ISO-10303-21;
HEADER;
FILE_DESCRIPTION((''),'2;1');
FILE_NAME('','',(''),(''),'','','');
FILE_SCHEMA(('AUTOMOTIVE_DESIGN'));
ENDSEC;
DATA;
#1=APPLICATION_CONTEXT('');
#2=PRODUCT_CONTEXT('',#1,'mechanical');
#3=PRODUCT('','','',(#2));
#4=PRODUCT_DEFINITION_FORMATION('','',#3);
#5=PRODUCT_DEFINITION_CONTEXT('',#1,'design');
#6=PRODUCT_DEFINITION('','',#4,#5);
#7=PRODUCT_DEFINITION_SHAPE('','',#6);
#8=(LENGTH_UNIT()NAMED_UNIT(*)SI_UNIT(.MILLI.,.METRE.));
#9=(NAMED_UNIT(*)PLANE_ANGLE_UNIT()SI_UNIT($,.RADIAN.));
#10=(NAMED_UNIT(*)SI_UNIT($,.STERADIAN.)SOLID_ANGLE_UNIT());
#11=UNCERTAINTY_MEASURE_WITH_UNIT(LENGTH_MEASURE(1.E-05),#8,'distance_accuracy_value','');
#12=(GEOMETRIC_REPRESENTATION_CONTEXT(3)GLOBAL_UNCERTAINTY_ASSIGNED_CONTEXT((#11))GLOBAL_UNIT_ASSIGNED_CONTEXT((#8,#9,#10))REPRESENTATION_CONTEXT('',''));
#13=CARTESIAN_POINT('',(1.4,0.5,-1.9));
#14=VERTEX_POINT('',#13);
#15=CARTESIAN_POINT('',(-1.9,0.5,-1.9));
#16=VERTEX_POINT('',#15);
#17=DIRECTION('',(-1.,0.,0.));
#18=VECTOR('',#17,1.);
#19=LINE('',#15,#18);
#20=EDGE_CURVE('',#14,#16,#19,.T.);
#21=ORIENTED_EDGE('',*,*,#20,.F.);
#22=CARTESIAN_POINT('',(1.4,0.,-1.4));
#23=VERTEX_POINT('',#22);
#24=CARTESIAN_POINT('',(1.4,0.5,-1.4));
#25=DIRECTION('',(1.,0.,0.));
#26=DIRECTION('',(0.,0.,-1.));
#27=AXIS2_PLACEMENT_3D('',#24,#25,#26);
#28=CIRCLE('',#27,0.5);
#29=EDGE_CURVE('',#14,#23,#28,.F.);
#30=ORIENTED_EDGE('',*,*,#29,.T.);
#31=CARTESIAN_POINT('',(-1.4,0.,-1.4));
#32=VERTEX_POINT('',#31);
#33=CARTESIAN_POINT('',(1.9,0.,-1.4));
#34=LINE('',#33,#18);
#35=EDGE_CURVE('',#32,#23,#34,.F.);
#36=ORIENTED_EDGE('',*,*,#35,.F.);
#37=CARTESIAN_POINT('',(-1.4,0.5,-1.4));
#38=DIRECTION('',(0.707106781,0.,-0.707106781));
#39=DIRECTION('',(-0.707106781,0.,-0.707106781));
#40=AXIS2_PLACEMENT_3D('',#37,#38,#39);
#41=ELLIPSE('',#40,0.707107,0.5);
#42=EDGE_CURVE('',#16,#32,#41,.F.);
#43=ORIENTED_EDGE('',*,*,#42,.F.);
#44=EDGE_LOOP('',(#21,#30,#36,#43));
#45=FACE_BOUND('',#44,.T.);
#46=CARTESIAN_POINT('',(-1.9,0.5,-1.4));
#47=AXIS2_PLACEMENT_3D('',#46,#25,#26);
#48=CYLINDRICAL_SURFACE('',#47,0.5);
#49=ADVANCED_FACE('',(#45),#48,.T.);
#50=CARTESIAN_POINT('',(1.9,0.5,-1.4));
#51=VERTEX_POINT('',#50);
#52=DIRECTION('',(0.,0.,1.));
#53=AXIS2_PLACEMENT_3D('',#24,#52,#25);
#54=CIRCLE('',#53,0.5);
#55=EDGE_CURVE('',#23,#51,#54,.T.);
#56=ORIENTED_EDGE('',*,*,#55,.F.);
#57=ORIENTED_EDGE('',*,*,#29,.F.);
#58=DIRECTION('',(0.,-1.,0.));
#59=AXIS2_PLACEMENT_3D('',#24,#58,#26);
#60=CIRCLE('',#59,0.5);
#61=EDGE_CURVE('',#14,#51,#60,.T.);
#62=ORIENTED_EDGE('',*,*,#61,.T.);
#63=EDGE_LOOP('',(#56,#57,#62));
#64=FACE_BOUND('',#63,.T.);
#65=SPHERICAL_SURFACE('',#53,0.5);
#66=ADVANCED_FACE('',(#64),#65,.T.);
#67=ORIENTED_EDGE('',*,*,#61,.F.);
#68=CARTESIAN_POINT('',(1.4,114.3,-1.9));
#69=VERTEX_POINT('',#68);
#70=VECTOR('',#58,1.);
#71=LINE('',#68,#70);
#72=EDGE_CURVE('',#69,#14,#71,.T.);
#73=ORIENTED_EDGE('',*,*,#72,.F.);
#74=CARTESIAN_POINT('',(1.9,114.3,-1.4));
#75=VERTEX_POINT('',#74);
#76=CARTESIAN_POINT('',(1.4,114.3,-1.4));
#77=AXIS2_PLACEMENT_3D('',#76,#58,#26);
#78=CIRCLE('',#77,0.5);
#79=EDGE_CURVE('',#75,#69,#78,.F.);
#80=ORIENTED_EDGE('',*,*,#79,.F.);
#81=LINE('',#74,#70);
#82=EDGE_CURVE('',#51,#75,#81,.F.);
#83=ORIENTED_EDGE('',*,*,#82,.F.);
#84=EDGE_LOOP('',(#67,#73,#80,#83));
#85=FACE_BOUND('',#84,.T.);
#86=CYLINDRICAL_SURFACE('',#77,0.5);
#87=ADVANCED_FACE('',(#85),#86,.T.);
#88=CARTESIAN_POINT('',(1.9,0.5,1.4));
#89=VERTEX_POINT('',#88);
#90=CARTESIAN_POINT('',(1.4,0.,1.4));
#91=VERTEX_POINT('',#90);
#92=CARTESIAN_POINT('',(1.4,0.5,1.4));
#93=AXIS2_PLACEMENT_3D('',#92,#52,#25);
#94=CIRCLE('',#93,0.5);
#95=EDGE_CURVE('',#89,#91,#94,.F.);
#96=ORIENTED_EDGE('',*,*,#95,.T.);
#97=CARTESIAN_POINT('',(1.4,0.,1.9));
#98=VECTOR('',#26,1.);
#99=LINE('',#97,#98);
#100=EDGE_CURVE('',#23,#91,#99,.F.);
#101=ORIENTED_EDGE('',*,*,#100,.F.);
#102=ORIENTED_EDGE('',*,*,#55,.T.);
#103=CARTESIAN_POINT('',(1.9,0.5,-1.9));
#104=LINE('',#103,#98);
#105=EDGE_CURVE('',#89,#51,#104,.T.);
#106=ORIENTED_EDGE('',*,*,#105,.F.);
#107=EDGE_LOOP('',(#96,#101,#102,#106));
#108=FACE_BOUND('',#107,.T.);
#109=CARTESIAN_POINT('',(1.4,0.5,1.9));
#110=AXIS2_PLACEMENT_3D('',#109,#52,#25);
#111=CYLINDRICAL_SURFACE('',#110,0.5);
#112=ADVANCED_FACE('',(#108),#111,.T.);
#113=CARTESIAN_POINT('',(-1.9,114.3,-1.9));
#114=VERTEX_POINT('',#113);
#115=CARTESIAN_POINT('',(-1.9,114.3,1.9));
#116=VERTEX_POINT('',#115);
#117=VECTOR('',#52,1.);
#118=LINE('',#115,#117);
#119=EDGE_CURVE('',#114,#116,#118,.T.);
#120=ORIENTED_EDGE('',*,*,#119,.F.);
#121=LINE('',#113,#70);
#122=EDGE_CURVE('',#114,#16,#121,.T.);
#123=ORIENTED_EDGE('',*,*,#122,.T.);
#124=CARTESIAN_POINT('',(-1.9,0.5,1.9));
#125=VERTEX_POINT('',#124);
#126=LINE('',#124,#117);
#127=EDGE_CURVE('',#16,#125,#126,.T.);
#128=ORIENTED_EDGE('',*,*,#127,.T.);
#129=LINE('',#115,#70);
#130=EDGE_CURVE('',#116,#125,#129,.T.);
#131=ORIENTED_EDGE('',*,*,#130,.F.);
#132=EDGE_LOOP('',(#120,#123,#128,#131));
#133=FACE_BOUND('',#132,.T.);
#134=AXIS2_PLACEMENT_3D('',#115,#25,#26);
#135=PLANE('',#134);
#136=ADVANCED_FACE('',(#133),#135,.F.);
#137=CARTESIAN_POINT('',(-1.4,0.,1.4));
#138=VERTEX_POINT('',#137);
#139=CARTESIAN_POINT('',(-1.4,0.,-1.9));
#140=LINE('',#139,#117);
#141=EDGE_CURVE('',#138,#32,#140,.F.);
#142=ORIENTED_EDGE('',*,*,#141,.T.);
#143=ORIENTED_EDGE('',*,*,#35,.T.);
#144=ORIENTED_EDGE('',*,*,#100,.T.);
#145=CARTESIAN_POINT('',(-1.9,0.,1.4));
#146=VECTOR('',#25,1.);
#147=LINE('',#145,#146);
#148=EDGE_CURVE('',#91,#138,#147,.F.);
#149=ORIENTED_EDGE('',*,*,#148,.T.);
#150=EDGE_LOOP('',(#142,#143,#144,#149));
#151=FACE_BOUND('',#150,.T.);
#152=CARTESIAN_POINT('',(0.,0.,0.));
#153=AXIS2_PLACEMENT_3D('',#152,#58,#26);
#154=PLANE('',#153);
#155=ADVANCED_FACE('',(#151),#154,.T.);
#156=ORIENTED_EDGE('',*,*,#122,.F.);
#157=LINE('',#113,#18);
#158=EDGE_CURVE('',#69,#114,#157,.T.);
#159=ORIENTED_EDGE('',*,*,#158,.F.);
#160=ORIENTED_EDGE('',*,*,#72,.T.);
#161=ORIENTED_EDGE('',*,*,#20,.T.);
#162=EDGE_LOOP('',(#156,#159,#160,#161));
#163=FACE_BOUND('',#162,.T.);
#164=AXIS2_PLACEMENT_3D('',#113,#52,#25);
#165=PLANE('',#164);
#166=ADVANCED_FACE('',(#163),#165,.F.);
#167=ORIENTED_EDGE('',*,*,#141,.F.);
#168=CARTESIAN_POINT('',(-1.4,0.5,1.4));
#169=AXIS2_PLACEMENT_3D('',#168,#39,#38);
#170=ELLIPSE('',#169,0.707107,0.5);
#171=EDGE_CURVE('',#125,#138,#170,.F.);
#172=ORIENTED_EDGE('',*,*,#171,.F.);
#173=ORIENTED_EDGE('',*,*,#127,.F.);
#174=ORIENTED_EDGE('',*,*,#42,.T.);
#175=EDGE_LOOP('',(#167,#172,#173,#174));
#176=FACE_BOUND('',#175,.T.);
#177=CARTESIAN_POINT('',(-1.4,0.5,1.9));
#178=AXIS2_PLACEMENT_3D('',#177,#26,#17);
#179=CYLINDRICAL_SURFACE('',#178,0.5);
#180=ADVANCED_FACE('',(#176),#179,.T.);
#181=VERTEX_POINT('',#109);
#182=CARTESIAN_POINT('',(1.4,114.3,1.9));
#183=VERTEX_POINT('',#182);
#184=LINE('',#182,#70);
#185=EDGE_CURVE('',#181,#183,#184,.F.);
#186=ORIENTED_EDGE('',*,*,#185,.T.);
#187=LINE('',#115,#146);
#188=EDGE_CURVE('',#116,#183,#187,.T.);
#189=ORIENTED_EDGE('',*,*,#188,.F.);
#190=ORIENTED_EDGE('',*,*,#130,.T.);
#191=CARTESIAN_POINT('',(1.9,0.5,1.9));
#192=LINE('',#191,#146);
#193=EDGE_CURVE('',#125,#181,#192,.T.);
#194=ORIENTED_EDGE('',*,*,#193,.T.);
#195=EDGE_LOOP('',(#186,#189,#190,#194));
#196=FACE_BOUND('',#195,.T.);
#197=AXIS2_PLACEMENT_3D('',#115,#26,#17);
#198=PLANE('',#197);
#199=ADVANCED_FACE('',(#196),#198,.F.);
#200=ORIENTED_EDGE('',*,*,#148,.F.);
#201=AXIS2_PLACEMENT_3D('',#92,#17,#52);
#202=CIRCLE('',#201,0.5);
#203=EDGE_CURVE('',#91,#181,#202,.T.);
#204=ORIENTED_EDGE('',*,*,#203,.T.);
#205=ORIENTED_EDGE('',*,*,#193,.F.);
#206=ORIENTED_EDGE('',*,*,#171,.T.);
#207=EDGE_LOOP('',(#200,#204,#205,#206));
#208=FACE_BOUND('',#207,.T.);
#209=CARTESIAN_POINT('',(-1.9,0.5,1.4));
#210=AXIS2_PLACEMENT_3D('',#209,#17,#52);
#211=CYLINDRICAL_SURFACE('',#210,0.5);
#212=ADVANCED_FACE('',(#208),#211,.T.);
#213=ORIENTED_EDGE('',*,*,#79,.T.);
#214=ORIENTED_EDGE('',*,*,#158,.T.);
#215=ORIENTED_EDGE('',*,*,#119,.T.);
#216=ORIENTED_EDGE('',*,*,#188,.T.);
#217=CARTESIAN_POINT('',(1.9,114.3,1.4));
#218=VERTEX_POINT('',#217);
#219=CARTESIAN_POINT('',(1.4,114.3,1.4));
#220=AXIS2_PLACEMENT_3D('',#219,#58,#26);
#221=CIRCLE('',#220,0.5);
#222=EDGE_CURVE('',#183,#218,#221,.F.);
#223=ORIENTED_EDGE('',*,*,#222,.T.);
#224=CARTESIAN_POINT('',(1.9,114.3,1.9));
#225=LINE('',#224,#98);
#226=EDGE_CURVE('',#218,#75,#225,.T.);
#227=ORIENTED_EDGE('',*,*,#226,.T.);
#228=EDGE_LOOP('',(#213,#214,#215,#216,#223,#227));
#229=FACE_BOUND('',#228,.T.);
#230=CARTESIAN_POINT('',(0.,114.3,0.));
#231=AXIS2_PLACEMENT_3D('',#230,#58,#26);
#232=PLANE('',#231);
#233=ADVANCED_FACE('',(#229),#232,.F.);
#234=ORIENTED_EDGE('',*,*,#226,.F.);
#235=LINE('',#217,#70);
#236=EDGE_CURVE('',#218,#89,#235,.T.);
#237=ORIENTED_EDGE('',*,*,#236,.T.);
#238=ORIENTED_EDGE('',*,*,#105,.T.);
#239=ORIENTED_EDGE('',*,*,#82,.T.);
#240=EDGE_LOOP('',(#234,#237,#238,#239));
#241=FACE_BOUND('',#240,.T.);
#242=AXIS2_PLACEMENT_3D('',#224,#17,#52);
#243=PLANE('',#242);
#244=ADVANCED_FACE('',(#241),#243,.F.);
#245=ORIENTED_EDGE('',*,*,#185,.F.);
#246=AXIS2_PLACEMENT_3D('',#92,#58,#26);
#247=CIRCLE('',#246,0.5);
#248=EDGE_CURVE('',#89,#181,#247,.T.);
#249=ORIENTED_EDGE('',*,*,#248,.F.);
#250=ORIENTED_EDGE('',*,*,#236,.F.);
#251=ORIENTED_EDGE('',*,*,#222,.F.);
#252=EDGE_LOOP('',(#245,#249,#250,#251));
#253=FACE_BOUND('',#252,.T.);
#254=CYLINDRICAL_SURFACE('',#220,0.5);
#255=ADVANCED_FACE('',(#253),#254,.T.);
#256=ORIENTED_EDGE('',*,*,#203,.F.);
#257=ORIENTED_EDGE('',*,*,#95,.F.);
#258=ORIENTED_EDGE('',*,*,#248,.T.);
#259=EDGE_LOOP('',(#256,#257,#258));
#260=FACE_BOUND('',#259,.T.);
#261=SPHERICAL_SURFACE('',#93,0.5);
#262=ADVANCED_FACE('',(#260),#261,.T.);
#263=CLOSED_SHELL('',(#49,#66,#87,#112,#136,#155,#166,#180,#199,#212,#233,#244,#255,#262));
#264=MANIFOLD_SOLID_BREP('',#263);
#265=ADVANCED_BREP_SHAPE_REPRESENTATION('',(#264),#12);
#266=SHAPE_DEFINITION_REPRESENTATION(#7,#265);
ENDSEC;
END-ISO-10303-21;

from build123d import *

# Parameters (mm, degrees)
SKETCH1_W           = 3.8
SKETCH1_H           = 3.8
BOSS_EXTRUDE1_DEPTH = 114.3
FILLET1_R           = 0.5
FILLET2_R           = 0.5


with BuildPart() as part:
    # Sketch1 → Boss-Extrude1 (new body)
    with BuildSketch(Plane(origin=(0, 0, 0), x_dir=(1, 0, 0), z_dir=(0, 1, 0))):
        Rectangle(SKETCH1_W, SKETCH1_H)
    extrude(amount=BOSS_EXTRUDE1_DEPTH)

    # Fillet1
    fillet1_edges = [part.edges().sort_by_distance(p)[0] for p in [
        (0, 0, 1.9),
        (-1.9, 0, 0),
        (0, 0, -1.9),
        (1.9, 0, 0),
    ]]
    fillet(fillet1_edges, radius=FILLET1_R)

    # Fillet2
    # the kernel refuses this fillet: 0.5 mm, written as the material it takes off along each edge
    with BuildSketch(Plane(origin=(1.4, 0.5, -1.4), x_dir=(0, 0, -1), z_dir=(1, 0, 0))) as fillet2_piece_1_section:
        Polygon((0, 0), (FILLET2_R, 0), (FILLET2_R, -FILLET2_R), (0, -FILLET2_R), align=None)
    fillet2_piece_1 = extrude(amount=FILLET2_R, mode=Mode.PRIVATE)
    fillet2_piece_1 = fillet2_piece_1 - Plane(origin=(1.4, 0.5, -1.4), x_dir=(0, 0.7071067811865475, 0.7071067811865475), z_dir=(1, 0, 0)) * Sphere(FILLET2_R, mode=Mode.PRIVATE)
    add(fillet2_piece_1, mode=Mode.SUBTRACT)
    with BuildSketch(Plane(origin=(1.4, 0.5, 1.4), x_dir=(1, 0, 0), z_dir=(0, 0, 1))) as fillet2_piece_2_section:
        Polygon((0, 0), (FILLET2_R, 0), (FILLET2_R, -FILLET2_R), (0, -FILLET2_R), align=None)
    fillet2_piece_2 = extrude(amount=FILLET2_R, mode=Mode.PRIVATE)
    fillet2_piece_2 = fillet2_piece_2 - Plane(origin=(1.4, 0.5, 1.4), x_dir=(-0.7071067811865475, 0.7071067811865475, 0), z_dir=(0, 0, 1)) * Sphere(FILLET2_R, mode=Mode.PRIVATE)
    add(fillet2_piece_2, mode=Mode.SUBTRACT)
    with BuildSketch(Plane(origin=(1.9, 0.5, 1.9), x_dir=(-1, 0, 0), z_dir=(0, 1, 0)), Plane(origin=(1.9, 0.5, -1.9), x_dir=(0, 0, 1), z_dir=(0, 1, 0))) as fillet2_piece_3:
        with BuildLine():
            CenterArc((FILLET2_R, -FILLET2_R), FILLET2_R, 90, 90)
            Line((0, -FILLET2_R), (0, 0))
            Line((0, 0), (FILLET2_R, 0))
        make_face()
    extrude(amount=115.05, mode=Mode.SUBTRACT)


solid = part.part
